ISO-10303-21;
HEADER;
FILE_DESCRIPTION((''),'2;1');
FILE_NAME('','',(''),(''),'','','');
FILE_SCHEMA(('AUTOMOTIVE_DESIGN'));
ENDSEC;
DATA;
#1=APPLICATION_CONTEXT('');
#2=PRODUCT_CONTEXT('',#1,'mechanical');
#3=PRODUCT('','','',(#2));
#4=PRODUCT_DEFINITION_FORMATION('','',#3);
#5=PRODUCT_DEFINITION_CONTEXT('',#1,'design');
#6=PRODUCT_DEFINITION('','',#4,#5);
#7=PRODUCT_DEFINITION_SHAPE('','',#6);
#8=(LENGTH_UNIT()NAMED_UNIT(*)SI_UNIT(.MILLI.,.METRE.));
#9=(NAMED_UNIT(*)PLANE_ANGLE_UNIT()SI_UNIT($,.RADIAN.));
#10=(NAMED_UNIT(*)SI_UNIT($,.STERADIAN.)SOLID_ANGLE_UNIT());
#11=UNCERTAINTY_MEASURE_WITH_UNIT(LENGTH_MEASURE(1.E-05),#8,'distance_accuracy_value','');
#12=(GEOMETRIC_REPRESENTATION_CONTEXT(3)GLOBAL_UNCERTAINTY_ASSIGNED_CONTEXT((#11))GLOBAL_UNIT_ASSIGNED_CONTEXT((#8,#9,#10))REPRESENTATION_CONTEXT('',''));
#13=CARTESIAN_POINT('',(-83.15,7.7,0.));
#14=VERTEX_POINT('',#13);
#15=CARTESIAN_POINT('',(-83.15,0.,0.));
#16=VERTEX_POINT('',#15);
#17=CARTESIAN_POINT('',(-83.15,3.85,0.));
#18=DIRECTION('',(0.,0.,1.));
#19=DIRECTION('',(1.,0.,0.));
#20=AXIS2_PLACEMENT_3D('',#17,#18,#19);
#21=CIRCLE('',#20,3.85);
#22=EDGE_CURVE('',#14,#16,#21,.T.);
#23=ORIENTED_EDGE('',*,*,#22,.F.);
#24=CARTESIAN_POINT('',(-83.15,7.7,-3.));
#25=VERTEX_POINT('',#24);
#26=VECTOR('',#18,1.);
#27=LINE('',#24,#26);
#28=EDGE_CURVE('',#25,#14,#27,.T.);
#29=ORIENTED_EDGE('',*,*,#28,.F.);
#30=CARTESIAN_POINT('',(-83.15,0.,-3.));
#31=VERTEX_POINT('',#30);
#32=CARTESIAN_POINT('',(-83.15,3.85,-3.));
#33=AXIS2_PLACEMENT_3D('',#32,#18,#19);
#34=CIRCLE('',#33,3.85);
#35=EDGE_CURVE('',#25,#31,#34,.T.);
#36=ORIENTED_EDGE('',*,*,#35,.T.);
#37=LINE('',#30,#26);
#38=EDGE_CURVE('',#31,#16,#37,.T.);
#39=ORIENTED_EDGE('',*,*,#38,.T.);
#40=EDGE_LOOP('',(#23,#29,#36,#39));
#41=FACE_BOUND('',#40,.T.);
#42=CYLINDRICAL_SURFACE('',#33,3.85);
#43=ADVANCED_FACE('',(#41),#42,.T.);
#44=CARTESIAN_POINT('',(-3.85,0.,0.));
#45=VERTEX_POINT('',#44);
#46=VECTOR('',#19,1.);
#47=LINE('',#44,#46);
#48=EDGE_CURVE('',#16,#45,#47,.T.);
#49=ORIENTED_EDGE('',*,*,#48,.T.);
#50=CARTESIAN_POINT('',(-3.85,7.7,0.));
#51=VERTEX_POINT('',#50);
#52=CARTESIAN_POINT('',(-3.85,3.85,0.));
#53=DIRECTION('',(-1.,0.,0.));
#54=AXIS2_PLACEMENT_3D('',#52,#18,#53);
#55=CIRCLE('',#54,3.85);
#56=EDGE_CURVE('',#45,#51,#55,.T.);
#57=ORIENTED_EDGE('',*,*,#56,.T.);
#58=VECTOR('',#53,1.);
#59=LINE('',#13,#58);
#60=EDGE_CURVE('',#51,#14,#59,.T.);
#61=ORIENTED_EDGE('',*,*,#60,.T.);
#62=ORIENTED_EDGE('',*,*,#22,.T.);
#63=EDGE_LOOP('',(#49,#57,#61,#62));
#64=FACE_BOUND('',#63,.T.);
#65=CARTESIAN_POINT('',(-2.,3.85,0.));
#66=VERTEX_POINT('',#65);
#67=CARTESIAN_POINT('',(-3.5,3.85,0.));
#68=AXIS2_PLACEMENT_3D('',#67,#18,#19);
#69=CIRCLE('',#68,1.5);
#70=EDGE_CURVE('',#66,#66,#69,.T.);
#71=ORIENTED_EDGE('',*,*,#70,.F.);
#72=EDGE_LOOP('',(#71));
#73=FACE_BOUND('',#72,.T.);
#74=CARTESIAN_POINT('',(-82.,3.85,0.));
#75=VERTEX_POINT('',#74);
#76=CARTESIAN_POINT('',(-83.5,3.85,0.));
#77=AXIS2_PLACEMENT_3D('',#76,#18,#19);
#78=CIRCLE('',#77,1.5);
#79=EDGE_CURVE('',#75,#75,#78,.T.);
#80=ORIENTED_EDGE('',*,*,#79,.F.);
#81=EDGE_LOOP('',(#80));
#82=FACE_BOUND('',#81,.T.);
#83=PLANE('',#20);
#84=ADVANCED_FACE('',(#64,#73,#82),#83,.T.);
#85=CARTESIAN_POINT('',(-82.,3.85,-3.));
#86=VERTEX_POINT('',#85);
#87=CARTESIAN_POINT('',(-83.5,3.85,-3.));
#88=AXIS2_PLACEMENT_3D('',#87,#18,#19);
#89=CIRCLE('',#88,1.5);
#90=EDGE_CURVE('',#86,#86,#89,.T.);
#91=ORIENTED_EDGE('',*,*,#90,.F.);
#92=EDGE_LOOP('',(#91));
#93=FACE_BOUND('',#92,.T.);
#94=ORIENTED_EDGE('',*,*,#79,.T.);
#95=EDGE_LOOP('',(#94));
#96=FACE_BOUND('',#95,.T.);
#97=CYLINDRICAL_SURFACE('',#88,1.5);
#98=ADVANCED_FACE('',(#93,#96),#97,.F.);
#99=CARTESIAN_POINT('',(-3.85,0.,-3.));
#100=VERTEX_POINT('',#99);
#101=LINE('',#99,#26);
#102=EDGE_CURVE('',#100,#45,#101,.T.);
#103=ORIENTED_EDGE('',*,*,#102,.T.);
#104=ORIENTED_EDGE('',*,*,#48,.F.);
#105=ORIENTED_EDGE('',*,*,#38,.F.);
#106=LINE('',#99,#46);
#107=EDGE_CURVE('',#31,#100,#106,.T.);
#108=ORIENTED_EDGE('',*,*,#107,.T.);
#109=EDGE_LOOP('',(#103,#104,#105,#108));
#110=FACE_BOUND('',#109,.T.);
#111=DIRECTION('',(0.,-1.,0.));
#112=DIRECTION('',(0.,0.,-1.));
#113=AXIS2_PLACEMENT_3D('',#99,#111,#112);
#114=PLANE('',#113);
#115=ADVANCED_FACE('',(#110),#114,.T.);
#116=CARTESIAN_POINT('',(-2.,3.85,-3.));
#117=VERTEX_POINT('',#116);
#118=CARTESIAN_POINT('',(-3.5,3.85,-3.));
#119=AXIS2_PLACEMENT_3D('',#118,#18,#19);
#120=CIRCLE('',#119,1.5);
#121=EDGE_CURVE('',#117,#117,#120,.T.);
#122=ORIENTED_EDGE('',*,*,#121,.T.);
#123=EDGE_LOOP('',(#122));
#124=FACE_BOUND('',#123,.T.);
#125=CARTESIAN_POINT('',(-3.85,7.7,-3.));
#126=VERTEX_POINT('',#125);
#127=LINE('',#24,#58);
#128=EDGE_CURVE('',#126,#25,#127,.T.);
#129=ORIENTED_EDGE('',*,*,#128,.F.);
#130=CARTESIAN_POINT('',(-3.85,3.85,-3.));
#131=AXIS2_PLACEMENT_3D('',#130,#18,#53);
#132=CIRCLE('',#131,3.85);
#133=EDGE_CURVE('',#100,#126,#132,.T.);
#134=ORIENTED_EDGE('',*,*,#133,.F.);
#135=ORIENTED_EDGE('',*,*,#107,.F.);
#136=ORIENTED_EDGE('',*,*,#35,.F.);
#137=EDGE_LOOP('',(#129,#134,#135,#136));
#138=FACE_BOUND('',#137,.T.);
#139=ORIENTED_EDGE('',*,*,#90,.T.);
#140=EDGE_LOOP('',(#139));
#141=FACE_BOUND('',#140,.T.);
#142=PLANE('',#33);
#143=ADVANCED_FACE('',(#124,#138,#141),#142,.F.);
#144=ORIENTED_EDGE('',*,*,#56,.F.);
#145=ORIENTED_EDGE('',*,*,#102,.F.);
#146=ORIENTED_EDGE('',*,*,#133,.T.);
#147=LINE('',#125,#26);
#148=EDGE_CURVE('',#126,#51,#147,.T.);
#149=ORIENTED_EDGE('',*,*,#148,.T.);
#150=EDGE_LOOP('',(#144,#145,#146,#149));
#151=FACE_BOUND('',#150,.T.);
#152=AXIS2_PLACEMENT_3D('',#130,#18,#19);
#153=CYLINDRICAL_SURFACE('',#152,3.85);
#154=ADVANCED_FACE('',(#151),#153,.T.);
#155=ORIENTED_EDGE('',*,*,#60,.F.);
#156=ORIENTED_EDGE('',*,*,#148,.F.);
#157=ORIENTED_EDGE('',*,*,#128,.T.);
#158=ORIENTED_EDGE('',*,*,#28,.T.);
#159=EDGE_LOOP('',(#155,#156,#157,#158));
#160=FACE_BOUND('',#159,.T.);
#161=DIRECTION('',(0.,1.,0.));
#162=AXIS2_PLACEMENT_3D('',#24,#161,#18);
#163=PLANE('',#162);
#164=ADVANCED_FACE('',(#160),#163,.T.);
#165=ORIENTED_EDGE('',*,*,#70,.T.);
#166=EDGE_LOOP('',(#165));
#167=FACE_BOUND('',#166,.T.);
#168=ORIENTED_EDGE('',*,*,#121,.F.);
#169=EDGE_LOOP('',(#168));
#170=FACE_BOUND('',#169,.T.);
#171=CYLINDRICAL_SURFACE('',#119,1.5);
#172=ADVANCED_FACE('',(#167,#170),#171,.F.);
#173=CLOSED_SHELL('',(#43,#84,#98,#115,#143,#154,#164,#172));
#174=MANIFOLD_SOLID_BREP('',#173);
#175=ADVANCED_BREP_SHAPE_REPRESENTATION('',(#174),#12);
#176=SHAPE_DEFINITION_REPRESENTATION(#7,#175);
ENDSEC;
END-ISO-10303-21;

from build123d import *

# Parameters (mm, degrees)
ESQUISSE1_R               = 1.5
T_LE_DE_BASE_PLI_E1_DEPTH = 3


# Sheet-metal steps are written as plain solids
with BuildPart() as part:
    # Esquisse1 → Tôle de base pliée1 (new body)
    with BuildSketch(Plane.XY):
        with BuildLine():
            Line((-83.15, 7.7), (-3.85, 7.7))
            ThreePointArc((-3.85, 7.7), (0, 3.85), (-3.85, 0))
            Line((-3.85, 0), (-83.15, 0))
            ThreePointArc((-83.15, 0), (-87, 3.85), (-83.15, 7.7))
        make_face()
        with Locations((-3.5, 3.85)):
            Circle(ESQUISSE1_R, mode=Mode.SUBTRACT)
        with Locations((-83.5, 3.85)):
            Circle(ESQUISSE1_R, mode=Mode.SUBTRACT)
    extrude(amount=-T_LE_DE_BASE_PLI_E1_DEPTH)


solid = part.part
